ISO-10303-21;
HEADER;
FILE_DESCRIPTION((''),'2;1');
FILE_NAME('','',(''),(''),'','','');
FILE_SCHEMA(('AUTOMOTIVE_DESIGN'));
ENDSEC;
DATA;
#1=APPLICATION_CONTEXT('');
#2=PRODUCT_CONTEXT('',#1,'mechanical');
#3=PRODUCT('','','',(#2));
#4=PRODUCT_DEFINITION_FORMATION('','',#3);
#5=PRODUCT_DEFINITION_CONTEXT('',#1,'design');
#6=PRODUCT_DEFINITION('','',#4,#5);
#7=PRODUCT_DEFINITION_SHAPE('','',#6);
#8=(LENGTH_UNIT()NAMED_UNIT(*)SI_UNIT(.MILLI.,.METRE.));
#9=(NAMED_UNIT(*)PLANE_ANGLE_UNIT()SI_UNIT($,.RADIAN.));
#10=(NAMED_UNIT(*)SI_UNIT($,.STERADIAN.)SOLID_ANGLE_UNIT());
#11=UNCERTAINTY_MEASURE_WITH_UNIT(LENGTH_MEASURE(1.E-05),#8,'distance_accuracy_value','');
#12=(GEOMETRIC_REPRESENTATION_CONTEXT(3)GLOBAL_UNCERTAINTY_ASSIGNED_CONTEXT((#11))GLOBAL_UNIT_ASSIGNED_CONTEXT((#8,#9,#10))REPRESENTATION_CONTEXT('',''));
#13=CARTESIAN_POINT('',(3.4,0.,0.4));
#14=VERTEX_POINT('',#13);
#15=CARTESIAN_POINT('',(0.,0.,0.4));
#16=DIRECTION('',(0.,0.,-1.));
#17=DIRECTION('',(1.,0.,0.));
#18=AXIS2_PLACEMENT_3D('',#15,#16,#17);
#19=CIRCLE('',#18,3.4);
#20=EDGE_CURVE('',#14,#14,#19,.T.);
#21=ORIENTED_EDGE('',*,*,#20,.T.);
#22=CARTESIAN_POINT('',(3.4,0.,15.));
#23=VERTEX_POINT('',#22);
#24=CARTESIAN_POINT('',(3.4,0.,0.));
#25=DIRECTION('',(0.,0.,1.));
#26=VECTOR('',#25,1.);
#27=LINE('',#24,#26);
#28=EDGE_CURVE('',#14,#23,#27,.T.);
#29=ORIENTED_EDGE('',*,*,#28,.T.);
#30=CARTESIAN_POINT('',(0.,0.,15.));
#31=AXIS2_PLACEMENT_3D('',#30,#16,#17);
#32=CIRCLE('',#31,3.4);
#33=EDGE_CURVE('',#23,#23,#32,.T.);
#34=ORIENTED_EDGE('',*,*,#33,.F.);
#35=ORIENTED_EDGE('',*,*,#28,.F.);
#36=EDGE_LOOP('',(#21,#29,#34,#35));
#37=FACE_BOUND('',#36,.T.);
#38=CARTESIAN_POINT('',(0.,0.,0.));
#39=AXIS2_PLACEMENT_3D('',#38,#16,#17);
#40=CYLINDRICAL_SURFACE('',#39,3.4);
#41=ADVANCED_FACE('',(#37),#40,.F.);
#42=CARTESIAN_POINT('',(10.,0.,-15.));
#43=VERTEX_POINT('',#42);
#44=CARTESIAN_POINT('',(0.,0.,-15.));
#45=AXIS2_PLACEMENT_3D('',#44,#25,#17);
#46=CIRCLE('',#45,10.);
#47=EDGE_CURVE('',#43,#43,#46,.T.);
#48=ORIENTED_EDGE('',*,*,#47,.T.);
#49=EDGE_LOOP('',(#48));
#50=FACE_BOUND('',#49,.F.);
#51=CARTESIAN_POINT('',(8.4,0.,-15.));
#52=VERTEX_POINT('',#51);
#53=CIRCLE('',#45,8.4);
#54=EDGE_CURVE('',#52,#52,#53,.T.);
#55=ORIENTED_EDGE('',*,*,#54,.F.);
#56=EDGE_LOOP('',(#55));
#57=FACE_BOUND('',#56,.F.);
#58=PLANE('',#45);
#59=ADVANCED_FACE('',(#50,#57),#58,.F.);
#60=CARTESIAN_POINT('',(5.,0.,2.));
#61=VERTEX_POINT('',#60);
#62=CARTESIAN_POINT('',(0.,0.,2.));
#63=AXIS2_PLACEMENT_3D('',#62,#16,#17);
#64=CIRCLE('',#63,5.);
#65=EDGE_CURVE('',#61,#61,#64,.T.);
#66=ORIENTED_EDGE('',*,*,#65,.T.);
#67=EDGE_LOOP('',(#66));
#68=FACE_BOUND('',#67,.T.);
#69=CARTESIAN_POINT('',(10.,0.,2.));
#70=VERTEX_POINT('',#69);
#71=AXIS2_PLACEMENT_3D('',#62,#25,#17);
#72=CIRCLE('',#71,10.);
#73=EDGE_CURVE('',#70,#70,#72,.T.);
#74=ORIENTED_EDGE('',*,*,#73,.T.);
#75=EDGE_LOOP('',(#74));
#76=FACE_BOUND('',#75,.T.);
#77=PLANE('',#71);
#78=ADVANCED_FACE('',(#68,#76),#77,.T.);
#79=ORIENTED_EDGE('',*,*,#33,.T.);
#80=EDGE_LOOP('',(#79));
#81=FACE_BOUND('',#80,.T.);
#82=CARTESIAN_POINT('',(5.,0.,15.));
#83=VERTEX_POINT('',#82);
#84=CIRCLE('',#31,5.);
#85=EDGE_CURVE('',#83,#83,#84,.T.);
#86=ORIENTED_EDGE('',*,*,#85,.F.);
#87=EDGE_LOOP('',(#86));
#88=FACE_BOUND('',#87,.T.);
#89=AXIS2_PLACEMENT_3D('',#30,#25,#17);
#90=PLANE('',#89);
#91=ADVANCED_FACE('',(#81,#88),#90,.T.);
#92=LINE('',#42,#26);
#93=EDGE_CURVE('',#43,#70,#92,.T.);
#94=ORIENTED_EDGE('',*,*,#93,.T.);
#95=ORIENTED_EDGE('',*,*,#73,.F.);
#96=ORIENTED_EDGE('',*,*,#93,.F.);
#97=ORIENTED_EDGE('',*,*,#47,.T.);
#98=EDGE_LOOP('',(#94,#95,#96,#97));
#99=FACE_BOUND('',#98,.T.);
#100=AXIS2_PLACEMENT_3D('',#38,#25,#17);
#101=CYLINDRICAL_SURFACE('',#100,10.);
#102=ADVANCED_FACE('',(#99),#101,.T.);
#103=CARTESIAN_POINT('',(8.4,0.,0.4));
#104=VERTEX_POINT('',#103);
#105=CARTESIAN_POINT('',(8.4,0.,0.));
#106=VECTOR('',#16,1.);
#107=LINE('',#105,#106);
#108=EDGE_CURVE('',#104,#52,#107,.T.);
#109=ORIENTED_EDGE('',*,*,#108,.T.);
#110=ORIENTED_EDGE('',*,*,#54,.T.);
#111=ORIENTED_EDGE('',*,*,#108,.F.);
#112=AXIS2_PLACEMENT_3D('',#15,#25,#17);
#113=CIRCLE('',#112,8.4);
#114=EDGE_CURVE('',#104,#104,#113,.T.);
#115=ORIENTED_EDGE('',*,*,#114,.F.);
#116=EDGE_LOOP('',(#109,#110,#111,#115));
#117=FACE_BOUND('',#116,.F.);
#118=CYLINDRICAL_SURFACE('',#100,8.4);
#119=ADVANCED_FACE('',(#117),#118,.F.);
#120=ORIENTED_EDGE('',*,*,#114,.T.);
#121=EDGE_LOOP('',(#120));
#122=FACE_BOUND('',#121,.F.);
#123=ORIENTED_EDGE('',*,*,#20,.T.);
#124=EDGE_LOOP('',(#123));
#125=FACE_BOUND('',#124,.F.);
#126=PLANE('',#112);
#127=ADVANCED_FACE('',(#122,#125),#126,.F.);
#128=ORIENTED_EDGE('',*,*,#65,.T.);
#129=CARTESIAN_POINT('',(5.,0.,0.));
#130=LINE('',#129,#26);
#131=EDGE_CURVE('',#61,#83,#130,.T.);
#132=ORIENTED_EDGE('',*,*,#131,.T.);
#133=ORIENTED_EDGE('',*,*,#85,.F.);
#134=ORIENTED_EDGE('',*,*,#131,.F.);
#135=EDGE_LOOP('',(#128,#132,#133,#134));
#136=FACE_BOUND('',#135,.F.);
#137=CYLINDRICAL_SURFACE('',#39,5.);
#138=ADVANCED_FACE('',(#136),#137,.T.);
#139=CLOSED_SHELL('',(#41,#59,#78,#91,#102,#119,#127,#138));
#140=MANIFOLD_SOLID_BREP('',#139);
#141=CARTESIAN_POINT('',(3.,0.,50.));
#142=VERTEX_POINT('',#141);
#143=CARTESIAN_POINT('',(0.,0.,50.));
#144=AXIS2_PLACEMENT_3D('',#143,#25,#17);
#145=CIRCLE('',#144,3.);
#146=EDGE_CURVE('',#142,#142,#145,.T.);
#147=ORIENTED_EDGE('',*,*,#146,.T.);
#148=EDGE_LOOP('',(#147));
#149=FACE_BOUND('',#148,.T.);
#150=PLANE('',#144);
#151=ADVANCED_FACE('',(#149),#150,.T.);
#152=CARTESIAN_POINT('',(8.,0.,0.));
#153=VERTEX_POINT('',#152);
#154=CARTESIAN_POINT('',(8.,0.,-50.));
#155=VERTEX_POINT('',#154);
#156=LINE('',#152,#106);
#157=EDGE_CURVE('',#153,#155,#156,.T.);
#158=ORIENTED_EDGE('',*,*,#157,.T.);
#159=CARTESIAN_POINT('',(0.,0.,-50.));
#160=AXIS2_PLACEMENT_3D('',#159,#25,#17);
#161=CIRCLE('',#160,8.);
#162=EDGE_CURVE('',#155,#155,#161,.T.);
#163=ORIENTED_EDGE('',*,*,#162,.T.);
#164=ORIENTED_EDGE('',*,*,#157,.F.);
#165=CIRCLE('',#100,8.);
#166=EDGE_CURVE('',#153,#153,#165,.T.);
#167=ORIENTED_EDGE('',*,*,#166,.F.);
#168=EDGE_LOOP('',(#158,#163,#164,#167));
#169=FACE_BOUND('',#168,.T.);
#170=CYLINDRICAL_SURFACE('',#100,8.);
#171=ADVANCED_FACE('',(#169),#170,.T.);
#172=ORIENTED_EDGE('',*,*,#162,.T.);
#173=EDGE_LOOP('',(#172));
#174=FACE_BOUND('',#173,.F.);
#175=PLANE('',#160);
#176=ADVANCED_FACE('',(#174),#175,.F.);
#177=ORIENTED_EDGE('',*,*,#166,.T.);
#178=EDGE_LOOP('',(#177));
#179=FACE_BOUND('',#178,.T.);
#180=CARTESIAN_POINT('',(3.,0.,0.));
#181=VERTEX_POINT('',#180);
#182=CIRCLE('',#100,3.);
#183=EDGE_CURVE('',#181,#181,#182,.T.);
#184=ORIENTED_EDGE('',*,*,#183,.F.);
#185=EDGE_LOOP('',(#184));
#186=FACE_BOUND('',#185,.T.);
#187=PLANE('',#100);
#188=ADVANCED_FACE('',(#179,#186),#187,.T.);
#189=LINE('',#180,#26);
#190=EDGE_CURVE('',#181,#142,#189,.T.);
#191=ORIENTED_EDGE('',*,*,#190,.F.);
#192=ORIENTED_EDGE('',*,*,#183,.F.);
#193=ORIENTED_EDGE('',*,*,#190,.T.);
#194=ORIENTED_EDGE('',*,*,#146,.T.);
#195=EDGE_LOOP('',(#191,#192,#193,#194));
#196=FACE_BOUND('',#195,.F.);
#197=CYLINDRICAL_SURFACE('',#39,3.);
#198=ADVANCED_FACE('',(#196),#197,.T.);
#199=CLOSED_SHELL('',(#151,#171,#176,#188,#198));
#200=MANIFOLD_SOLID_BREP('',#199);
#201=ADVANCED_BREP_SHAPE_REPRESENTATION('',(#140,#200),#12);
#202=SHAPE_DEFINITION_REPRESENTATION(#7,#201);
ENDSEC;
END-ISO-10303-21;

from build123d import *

# Parameters (mm, degrees)
F0_R      = 3
F1_DEPTH  = 50
F0_R_2    = 8
F2_DEPTH  = 50
F3_R      = 10
F4_DEPTH  = 15
F5_OFFSET = 0.4
F6_T      = 1.6


# Not quite as in the source:
# - a shell that OpenCascade refuses in one call is made with other operations: the cavity is built on its own and cut out


with BuildPart() as f1:
    # F0 (on Top) → F1 (new body)
    with BuildSketch(Plane.XY):
        Circle(F0_R)
    extrude(amount=F1_DEPTH)

    # F0 (on Top) → F2 (join)
    with BuildSketch(Plane.XY):
        Circle(F0_R_2)
        Circle(F0_R, mode=Mode.SUBTRACT)
        Circle(F0_R)
    extrude(amount=-F2_DEPTH)


with BuildPart() as f4:
    # F3 (on face) → F4 (new body, symmetric)
    with BuildSketch(Plane.XY):
        Circle(F3_R)
    extrude(amount=F4_DEPTH, both=True)

    # F5: cut F1, made larger all round first
    f5_tool = offset(f1.part, amount=F5_OFFSET, kind=Kind.INTERSECTION, mode=Mode.PRIVATE)
    add(f5_tool, mode=Mode.SUBTRACT)

    # F6: shell of thickness 1.6, made by hand


with BuildPart() as f6_core1:
    # F6_t2: copy of F4
    add(f4.part)

    # the walls: a layer under each face that stays
    f6_faces = [f6_core1.faces().sort_by_distance(p)[0] for p in [
        (-6.6666666667, -6.6666666667, -15),
        (-8.4, 0, -7.3),
        (-3.4, 0, 7.7),
        (-5.6, -5.6, 0.4),
    ]]
    thicken(f6_faces, amount=-F6_T, mode=Mode.SUBTRACT)

    # F6_s3 → F6_t4 (revolve, cut)
    with BuildSketch(Plane.XZ):
        Polygon((8.384, 0.384), (10, 0.4), (10, 2), (8.4, 2), align=None)
    revolve(axis=Axis((0, 0, 0.4), (0, 0, 1)), mode=Mode.SUBTRACT)


with BuildPart() as f4_1:
    add(f4.part)

    # what is left inside the walls is the cavity
    f6_cavity = [f6_core1.part.solids().sort_by_distance(p)[0] for p in [
        (-9.984, 0, 6.333333),
    ]]
    add(f6_cavity, mode=Mode.SUBTRACT)


solid = Compound([f1.part, f4_1.part])
